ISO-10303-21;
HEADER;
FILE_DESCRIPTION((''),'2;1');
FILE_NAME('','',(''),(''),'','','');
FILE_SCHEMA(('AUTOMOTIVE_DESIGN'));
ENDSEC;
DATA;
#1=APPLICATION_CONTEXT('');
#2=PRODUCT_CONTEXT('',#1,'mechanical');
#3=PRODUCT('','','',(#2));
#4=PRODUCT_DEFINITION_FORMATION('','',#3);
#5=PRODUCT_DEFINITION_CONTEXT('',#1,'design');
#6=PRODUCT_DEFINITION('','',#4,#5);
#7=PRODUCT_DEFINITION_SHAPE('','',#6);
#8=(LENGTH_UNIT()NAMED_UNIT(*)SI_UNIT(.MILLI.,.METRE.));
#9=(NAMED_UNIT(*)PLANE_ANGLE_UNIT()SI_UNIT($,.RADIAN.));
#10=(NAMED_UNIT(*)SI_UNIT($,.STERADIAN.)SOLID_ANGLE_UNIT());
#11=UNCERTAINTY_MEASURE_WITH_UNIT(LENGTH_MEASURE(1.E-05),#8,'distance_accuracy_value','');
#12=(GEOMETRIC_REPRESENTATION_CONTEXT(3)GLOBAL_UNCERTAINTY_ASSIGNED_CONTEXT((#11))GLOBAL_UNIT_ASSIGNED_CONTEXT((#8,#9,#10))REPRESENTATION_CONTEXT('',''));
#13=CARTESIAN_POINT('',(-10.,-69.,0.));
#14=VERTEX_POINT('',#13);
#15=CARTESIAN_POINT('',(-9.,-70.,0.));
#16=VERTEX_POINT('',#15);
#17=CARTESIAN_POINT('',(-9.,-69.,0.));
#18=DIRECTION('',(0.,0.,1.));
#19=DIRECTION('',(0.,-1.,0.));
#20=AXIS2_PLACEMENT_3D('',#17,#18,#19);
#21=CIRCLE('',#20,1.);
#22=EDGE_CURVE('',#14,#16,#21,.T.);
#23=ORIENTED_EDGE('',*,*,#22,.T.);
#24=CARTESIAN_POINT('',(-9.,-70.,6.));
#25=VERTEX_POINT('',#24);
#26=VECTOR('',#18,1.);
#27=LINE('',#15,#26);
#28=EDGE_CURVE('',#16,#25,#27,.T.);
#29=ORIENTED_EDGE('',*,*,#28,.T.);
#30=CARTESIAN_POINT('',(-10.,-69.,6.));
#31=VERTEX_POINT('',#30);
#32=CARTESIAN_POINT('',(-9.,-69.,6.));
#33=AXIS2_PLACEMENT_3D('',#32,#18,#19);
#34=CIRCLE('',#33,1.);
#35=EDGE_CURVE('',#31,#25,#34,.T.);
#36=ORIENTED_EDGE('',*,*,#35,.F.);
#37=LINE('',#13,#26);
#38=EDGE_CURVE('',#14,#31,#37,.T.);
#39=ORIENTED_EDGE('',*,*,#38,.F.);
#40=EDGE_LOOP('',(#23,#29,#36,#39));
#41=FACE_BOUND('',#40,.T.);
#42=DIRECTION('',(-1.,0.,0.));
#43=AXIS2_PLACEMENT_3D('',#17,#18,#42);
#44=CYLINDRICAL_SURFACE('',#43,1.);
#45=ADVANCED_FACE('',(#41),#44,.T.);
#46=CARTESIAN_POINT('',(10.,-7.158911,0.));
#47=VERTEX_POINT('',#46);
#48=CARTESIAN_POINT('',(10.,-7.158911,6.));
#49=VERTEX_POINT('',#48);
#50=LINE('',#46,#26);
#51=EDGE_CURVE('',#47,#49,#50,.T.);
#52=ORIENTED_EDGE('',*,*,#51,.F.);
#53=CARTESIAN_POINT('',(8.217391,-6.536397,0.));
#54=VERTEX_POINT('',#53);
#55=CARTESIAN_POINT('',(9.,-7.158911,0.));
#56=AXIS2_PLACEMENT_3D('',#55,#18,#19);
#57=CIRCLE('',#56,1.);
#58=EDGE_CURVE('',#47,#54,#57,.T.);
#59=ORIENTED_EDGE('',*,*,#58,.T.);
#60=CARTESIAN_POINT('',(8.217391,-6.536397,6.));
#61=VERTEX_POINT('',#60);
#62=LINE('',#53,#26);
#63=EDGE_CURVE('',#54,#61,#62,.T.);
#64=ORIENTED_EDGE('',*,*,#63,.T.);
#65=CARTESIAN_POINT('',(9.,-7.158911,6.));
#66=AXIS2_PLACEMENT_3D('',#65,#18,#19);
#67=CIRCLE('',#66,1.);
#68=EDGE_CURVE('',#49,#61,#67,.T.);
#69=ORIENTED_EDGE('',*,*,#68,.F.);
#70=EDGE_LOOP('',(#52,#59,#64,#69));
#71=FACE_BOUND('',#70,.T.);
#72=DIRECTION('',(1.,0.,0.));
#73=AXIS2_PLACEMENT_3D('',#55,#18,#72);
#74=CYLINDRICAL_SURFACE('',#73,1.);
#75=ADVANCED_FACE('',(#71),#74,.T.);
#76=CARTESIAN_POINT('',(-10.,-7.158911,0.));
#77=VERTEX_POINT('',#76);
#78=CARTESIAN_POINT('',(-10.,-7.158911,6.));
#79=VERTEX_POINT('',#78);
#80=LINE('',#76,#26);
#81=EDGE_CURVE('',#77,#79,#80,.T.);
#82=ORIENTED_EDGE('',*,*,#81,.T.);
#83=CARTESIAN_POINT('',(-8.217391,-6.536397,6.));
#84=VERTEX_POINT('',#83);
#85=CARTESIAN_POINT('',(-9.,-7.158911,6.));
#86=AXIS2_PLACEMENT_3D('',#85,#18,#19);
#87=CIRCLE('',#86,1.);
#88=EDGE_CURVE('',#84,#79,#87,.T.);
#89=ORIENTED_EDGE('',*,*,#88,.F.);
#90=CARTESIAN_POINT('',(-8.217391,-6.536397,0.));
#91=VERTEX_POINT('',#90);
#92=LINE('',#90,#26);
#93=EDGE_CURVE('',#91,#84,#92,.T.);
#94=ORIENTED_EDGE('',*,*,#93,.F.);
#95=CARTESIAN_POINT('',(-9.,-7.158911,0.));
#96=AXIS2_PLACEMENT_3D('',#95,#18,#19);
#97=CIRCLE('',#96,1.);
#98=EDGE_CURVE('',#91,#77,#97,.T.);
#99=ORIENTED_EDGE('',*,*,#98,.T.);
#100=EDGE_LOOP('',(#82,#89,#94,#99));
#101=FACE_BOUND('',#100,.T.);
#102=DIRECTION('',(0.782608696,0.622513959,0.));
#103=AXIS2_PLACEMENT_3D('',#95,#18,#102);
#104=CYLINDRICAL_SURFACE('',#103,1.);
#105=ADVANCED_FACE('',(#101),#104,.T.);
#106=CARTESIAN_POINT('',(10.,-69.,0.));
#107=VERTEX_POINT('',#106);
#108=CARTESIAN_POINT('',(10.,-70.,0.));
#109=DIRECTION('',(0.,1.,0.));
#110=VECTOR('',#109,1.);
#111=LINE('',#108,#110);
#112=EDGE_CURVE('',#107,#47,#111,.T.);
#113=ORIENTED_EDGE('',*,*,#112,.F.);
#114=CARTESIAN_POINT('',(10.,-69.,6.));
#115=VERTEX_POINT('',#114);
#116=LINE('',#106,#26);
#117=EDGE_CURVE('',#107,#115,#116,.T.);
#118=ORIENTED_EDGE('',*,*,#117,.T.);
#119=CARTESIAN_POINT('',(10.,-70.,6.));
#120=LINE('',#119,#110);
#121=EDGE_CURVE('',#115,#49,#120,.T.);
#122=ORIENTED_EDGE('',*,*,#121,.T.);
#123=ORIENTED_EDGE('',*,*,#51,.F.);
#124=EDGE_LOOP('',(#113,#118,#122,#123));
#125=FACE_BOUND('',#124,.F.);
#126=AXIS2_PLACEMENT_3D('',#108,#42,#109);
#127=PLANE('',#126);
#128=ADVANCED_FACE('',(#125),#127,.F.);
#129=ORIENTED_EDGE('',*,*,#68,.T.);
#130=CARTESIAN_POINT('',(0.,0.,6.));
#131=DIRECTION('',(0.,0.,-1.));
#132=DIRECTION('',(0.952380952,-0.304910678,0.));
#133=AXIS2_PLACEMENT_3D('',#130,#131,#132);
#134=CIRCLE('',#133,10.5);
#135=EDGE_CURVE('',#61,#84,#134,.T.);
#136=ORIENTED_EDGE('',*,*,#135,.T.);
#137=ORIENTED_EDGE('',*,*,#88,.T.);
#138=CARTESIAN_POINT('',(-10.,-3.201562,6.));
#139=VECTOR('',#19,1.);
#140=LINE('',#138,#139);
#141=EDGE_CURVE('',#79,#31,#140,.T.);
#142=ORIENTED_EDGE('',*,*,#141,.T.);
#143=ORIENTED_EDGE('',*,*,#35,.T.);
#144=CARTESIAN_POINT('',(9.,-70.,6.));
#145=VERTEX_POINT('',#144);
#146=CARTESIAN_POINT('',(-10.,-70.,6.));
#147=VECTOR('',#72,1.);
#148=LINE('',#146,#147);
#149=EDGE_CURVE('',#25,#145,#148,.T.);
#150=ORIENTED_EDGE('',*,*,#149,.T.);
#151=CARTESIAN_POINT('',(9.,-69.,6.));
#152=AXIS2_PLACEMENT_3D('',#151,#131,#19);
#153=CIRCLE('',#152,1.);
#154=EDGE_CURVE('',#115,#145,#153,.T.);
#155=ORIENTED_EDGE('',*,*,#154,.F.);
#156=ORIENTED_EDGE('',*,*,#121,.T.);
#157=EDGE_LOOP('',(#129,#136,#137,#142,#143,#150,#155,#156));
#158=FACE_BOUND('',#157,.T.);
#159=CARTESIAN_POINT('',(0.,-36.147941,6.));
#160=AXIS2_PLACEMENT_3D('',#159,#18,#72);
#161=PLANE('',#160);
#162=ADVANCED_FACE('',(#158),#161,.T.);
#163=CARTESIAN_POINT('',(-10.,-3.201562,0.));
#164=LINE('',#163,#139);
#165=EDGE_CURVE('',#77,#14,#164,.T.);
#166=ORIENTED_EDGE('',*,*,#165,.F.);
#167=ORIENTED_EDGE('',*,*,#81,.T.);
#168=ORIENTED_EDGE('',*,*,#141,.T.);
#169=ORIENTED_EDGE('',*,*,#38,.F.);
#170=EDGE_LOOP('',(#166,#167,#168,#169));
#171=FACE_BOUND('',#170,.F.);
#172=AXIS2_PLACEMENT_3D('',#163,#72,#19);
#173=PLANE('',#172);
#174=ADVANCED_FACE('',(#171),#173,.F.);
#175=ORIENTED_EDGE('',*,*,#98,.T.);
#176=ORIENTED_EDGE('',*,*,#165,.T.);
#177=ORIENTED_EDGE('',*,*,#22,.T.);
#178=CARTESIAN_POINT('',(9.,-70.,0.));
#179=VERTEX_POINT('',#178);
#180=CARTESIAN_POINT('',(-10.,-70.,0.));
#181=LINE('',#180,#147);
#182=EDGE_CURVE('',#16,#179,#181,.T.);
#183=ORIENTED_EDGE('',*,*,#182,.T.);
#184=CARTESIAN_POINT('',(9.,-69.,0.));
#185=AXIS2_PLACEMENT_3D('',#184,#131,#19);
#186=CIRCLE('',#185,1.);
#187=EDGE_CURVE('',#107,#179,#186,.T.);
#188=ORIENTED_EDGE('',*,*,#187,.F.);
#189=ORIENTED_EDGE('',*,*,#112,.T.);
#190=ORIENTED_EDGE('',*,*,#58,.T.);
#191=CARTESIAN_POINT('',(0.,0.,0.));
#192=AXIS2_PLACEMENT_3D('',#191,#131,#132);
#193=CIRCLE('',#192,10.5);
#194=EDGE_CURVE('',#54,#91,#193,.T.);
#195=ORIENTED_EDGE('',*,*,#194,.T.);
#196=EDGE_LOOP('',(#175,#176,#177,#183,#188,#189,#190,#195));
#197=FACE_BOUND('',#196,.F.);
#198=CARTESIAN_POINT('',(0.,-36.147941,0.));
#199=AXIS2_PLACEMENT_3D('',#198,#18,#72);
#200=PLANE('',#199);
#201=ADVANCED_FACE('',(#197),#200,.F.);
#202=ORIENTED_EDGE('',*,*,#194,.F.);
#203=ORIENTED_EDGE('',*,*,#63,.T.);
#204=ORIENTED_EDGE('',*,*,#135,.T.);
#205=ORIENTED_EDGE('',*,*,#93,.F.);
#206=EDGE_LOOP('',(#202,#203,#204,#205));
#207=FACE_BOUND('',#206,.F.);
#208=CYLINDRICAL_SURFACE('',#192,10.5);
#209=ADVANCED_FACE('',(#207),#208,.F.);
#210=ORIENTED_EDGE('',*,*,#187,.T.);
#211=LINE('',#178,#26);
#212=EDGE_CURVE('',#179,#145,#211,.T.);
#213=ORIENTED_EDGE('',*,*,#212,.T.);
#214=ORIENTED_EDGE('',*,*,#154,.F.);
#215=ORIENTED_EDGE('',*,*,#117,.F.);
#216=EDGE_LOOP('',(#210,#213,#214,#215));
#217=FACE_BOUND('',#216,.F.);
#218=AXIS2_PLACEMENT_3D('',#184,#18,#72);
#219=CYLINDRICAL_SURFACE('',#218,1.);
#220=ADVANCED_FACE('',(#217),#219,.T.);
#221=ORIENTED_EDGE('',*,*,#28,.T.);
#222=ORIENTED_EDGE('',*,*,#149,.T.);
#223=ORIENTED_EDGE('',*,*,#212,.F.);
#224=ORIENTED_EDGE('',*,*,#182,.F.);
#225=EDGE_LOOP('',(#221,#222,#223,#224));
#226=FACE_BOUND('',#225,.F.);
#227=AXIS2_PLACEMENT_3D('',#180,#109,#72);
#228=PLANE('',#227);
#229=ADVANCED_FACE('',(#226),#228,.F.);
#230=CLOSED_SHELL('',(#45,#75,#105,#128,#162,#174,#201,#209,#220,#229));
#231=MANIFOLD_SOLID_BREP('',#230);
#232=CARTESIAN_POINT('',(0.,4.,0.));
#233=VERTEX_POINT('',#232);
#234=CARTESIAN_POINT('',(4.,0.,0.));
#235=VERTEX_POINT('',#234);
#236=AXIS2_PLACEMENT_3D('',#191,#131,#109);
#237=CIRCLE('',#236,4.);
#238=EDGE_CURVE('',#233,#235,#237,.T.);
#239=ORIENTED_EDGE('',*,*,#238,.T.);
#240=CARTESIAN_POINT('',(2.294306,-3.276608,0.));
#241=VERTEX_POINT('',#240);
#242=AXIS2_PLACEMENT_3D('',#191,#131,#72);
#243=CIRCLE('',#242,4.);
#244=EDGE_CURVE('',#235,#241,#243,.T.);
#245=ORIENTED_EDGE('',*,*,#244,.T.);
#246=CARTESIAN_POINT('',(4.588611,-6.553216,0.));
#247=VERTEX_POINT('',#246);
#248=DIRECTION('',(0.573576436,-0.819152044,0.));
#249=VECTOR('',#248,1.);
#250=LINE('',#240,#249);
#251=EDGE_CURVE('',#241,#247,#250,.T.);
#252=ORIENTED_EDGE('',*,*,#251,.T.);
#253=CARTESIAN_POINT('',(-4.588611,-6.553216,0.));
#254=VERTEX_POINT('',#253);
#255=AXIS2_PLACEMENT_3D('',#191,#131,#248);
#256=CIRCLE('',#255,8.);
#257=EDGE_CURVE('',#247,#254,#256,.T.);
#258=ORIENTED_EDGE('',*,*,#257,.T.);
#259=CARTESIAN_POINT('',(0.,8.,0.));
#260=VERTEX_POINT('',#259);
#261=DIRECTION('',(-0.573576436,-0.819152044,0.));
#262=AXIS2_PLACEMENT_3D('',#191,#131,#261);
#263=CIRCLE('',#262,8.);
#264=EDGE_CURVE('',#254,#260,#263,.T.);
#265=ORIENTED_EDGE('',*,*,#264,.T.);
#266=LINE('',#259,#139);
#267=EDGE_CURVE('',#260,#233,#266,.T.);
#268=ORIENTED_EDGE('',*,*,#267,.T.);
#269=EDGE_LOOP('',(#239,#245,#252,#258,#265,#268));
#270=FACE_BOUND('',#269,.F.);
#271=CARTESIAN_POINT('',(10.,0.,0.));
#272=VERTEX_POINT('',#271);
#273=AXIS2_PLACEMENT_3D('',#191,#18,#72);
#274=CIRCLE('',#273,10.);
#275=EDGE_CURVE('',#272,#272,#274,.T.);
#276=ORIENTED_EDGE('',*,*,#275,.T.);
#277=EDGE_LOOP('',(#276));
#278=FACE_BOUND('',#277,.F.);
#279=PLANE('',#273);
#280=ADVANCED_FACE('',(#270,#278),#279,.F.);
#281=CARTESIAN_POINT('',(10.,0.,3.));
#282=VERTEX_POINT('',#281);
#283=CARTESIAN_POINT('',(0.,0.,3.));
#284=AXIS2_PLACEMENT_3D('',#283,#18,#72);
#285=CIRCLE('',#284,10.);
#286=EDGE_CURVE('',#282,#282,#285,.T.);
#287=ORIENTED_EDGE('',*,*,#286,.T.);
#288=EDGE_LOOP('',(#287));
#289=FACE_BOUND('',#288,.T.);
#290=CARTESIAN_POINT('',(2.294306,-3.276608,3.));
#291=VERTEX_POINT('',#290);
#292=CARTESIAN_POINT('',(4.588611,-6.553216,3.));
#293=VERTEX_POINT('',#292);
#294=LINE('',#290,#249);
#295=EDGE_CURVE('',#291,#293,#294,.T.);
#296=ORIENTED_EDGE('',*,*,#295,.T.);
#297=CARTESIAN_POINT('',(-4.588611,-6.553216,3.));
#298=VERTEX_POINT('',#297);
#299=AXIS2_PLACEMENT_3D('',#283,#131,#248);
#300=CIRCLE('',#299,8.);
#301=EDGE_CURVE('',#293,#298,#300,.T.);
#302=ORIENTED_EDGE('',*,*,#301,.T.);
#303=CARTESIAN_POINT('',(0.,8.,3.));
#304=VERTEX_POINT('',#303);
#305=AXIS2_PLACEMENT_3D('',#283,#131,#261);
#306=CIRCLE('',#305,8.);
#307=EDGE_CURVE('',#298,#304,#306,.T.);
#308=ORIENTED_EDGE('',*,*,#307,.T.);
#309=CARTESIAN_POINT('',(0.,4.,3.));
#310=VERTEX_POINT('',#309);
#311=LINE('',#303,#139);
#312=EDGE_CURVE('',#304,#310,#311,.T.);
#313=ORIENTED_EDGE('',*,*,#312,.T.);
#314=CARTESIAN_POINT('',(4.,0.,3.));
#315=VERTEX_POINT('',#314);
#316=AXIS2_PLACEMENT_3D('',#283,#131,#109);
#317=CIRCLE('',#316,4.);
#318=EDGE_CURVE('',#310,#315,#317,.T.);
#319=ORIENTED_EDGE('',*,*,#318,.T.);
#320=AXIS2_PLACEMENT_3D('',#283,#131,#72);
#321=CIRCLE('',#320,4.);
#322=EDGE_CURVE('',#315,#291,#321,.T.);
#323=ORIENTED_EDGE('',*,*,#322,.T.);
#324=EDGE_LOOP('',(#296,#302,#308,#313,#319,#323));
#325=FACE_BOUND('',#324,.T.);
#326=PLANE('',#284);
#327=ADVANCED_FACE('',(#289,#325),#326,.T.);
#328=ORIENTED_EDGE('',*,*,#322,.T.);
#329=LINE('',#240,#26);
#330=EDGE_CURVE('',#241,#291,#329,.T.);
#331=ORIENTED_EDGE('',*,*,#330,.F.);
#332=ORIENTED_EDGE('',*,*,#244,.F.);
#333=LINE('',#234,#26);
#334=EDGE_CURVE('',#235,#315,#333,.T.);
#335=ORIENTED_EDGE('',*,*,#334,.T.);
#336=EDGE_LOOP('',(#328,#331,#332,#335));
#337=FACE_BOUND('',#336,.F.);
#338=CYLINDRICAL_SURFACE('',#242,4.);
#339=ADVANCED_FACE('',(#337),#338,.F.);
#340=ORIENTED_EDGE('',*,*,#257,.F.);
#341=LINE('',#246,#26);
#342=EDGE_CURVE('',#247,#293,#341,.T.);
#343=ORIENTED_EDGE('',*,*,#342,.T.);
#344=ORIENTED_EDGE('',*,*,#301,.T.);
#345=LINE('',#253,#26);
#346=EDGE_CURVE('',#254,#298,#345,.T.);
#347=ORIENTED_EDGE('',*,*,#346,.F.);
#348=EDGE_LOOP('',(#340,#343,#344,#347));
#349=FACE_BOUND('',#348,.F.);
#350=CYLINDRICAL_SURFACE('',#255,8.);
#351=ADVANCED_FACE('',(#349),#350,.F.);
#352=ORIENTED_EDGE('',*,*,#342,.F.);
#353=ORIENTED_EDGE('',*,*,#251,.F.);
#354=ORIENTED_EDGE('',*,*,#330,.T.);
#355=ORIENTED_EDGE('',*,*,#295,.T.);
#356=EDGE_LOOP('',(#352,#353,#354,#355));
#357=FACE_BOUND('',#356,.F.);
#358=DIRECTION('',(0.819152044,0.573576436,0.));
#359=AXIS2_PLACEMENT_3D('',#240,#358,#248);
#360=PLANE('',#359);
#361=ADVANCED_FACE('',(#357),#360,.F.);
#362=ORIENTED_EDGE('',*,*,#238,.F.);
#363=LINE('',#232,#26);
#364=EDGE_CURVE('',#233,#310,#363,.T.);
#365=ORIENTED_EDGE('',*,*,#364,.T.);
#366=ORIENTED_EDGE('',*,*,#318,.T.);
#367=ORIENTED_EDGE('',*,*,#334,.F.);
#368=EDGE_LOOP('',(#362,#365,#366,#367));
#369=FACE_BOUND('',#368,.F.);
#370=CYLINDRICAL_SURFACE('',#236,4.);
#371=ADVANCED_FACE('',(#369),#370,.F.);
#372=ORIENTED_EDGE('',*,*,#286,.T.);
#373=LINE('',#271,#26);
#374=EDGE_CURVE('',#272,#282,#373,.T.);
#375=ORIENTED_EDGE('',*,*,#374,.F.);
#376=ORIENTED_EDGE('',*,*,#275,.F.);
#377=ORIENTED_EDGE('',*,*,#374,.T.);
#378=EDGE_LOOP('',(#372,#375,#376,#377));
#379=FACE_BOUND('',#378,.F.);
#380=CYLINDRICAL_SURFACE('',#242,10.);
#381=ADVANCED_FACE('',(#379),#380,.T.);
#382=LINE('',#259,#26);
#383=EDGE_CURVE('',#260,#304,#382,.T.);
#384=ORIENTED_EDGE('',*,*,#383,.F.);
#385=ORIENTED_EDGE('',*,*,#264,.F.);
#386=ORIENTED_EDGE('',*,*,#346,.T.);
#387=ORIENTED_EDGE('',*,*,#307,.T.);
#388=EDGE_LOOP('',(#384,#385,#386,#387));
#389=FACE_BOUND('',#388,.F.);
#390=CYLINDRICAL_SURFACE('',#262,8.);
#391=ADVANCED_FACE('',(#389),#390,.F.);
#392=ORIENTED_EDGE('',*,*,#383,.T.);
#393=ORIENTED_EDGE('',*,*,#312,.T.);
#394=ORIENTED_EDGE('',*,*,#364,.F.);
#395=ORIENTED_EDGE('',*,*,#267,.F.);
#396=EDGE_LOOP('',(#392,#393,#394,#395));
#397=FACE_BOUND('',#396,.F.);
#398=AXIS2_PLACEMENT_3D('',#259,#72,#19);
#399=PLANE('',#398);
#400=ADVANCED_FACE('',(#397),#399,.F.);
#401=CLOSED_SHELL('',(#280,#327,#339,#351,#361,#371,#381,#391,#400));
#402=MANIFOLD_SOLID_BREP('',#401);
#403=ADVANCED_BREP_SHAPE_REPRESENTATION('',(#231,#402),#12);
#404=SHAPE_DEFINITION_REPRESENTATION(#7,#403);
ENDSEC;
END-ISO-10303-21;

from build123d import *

# Parameters (mm, degrees)
F1_DEPTH = 6
F2_DEPTH = 3
F3_R     = 1


with BuildPart() as f1:
    # F0 (on Top) → F1 (new body)
    with BuildSketch(Plane.XY):
        with BuildLine():
            Line((10, -70), (10, -3.2015621187))
            ThreePointArc((10, -3.2015621187), (0, -10.5), (-10, -3.2015621187))
            Line((-10, -3.2015621187), (-10, -70))
            Line((-10, -70), (10, -70))
        make_face()
    extrude(amount=F1_DEPTH)

    # F3
    f3_edges = [f1.edges().sort_by_distance(p)[0] for p in [
        (10, -70, 3),
        (-10, -70, 3),
        (10, -3.201562, 3),
        (-10, -3.201562, 3),
    ]]
    fillet(f3_edges, radius=F3_R)


with BuildPart() as f2:
    # F0 (on Top) → F2 (new body)
    with BuildSketch(Plane.XY):
        with BuildLine():
            ThreePointArc((-10, 0), (0, -10), (10, 0))
            ThreePointArc((10, 0), (0, 10), (-10, 0))
        make_face()
        with BuildLine():
            ThreePointArc((0, 8), (5.6568542495, 5.6568542495), (8, 0))
            ThreePointArc((8, 0), (7.0960866654, -3.6939889059), (4.5886114908, -6.5532163543))
            ThreePointArc((4.5886114908, -6.5532163543), (0, -8), (-4.5886114908, -6.5532163543))
            ThreePointArc((-4.5886114908, -6.5532163543), (-7.629735606, 2.405646396), (0, 8))
        make_face(mode=Mode.SUBTRACT)
        with BuildLine():
            ThreePointArc((4.5886114908, -6.5532163543), (7.0960866654, -3.6939889059), (8, 0))
            ThreePointArc((8, 0), (5.6568542495, 5.6568542495), (0, 8))
            Line((0, 8), (0, 4))
            ThreePointArc((0, 4), (2.8284271247, 2.8284271247), (4, 0))
            ThreePointArc((4, 0), (3.5480433327, -1.8469944529), (2.2943057454, -3.2766081772))
            Line((2.2943057454, -3.2766081772), (4.5886114908, -6.5532163543))
        make_face()
    extrude(amount=F2_DEPTH)


solid = Compound([f1.part, f2.part])
